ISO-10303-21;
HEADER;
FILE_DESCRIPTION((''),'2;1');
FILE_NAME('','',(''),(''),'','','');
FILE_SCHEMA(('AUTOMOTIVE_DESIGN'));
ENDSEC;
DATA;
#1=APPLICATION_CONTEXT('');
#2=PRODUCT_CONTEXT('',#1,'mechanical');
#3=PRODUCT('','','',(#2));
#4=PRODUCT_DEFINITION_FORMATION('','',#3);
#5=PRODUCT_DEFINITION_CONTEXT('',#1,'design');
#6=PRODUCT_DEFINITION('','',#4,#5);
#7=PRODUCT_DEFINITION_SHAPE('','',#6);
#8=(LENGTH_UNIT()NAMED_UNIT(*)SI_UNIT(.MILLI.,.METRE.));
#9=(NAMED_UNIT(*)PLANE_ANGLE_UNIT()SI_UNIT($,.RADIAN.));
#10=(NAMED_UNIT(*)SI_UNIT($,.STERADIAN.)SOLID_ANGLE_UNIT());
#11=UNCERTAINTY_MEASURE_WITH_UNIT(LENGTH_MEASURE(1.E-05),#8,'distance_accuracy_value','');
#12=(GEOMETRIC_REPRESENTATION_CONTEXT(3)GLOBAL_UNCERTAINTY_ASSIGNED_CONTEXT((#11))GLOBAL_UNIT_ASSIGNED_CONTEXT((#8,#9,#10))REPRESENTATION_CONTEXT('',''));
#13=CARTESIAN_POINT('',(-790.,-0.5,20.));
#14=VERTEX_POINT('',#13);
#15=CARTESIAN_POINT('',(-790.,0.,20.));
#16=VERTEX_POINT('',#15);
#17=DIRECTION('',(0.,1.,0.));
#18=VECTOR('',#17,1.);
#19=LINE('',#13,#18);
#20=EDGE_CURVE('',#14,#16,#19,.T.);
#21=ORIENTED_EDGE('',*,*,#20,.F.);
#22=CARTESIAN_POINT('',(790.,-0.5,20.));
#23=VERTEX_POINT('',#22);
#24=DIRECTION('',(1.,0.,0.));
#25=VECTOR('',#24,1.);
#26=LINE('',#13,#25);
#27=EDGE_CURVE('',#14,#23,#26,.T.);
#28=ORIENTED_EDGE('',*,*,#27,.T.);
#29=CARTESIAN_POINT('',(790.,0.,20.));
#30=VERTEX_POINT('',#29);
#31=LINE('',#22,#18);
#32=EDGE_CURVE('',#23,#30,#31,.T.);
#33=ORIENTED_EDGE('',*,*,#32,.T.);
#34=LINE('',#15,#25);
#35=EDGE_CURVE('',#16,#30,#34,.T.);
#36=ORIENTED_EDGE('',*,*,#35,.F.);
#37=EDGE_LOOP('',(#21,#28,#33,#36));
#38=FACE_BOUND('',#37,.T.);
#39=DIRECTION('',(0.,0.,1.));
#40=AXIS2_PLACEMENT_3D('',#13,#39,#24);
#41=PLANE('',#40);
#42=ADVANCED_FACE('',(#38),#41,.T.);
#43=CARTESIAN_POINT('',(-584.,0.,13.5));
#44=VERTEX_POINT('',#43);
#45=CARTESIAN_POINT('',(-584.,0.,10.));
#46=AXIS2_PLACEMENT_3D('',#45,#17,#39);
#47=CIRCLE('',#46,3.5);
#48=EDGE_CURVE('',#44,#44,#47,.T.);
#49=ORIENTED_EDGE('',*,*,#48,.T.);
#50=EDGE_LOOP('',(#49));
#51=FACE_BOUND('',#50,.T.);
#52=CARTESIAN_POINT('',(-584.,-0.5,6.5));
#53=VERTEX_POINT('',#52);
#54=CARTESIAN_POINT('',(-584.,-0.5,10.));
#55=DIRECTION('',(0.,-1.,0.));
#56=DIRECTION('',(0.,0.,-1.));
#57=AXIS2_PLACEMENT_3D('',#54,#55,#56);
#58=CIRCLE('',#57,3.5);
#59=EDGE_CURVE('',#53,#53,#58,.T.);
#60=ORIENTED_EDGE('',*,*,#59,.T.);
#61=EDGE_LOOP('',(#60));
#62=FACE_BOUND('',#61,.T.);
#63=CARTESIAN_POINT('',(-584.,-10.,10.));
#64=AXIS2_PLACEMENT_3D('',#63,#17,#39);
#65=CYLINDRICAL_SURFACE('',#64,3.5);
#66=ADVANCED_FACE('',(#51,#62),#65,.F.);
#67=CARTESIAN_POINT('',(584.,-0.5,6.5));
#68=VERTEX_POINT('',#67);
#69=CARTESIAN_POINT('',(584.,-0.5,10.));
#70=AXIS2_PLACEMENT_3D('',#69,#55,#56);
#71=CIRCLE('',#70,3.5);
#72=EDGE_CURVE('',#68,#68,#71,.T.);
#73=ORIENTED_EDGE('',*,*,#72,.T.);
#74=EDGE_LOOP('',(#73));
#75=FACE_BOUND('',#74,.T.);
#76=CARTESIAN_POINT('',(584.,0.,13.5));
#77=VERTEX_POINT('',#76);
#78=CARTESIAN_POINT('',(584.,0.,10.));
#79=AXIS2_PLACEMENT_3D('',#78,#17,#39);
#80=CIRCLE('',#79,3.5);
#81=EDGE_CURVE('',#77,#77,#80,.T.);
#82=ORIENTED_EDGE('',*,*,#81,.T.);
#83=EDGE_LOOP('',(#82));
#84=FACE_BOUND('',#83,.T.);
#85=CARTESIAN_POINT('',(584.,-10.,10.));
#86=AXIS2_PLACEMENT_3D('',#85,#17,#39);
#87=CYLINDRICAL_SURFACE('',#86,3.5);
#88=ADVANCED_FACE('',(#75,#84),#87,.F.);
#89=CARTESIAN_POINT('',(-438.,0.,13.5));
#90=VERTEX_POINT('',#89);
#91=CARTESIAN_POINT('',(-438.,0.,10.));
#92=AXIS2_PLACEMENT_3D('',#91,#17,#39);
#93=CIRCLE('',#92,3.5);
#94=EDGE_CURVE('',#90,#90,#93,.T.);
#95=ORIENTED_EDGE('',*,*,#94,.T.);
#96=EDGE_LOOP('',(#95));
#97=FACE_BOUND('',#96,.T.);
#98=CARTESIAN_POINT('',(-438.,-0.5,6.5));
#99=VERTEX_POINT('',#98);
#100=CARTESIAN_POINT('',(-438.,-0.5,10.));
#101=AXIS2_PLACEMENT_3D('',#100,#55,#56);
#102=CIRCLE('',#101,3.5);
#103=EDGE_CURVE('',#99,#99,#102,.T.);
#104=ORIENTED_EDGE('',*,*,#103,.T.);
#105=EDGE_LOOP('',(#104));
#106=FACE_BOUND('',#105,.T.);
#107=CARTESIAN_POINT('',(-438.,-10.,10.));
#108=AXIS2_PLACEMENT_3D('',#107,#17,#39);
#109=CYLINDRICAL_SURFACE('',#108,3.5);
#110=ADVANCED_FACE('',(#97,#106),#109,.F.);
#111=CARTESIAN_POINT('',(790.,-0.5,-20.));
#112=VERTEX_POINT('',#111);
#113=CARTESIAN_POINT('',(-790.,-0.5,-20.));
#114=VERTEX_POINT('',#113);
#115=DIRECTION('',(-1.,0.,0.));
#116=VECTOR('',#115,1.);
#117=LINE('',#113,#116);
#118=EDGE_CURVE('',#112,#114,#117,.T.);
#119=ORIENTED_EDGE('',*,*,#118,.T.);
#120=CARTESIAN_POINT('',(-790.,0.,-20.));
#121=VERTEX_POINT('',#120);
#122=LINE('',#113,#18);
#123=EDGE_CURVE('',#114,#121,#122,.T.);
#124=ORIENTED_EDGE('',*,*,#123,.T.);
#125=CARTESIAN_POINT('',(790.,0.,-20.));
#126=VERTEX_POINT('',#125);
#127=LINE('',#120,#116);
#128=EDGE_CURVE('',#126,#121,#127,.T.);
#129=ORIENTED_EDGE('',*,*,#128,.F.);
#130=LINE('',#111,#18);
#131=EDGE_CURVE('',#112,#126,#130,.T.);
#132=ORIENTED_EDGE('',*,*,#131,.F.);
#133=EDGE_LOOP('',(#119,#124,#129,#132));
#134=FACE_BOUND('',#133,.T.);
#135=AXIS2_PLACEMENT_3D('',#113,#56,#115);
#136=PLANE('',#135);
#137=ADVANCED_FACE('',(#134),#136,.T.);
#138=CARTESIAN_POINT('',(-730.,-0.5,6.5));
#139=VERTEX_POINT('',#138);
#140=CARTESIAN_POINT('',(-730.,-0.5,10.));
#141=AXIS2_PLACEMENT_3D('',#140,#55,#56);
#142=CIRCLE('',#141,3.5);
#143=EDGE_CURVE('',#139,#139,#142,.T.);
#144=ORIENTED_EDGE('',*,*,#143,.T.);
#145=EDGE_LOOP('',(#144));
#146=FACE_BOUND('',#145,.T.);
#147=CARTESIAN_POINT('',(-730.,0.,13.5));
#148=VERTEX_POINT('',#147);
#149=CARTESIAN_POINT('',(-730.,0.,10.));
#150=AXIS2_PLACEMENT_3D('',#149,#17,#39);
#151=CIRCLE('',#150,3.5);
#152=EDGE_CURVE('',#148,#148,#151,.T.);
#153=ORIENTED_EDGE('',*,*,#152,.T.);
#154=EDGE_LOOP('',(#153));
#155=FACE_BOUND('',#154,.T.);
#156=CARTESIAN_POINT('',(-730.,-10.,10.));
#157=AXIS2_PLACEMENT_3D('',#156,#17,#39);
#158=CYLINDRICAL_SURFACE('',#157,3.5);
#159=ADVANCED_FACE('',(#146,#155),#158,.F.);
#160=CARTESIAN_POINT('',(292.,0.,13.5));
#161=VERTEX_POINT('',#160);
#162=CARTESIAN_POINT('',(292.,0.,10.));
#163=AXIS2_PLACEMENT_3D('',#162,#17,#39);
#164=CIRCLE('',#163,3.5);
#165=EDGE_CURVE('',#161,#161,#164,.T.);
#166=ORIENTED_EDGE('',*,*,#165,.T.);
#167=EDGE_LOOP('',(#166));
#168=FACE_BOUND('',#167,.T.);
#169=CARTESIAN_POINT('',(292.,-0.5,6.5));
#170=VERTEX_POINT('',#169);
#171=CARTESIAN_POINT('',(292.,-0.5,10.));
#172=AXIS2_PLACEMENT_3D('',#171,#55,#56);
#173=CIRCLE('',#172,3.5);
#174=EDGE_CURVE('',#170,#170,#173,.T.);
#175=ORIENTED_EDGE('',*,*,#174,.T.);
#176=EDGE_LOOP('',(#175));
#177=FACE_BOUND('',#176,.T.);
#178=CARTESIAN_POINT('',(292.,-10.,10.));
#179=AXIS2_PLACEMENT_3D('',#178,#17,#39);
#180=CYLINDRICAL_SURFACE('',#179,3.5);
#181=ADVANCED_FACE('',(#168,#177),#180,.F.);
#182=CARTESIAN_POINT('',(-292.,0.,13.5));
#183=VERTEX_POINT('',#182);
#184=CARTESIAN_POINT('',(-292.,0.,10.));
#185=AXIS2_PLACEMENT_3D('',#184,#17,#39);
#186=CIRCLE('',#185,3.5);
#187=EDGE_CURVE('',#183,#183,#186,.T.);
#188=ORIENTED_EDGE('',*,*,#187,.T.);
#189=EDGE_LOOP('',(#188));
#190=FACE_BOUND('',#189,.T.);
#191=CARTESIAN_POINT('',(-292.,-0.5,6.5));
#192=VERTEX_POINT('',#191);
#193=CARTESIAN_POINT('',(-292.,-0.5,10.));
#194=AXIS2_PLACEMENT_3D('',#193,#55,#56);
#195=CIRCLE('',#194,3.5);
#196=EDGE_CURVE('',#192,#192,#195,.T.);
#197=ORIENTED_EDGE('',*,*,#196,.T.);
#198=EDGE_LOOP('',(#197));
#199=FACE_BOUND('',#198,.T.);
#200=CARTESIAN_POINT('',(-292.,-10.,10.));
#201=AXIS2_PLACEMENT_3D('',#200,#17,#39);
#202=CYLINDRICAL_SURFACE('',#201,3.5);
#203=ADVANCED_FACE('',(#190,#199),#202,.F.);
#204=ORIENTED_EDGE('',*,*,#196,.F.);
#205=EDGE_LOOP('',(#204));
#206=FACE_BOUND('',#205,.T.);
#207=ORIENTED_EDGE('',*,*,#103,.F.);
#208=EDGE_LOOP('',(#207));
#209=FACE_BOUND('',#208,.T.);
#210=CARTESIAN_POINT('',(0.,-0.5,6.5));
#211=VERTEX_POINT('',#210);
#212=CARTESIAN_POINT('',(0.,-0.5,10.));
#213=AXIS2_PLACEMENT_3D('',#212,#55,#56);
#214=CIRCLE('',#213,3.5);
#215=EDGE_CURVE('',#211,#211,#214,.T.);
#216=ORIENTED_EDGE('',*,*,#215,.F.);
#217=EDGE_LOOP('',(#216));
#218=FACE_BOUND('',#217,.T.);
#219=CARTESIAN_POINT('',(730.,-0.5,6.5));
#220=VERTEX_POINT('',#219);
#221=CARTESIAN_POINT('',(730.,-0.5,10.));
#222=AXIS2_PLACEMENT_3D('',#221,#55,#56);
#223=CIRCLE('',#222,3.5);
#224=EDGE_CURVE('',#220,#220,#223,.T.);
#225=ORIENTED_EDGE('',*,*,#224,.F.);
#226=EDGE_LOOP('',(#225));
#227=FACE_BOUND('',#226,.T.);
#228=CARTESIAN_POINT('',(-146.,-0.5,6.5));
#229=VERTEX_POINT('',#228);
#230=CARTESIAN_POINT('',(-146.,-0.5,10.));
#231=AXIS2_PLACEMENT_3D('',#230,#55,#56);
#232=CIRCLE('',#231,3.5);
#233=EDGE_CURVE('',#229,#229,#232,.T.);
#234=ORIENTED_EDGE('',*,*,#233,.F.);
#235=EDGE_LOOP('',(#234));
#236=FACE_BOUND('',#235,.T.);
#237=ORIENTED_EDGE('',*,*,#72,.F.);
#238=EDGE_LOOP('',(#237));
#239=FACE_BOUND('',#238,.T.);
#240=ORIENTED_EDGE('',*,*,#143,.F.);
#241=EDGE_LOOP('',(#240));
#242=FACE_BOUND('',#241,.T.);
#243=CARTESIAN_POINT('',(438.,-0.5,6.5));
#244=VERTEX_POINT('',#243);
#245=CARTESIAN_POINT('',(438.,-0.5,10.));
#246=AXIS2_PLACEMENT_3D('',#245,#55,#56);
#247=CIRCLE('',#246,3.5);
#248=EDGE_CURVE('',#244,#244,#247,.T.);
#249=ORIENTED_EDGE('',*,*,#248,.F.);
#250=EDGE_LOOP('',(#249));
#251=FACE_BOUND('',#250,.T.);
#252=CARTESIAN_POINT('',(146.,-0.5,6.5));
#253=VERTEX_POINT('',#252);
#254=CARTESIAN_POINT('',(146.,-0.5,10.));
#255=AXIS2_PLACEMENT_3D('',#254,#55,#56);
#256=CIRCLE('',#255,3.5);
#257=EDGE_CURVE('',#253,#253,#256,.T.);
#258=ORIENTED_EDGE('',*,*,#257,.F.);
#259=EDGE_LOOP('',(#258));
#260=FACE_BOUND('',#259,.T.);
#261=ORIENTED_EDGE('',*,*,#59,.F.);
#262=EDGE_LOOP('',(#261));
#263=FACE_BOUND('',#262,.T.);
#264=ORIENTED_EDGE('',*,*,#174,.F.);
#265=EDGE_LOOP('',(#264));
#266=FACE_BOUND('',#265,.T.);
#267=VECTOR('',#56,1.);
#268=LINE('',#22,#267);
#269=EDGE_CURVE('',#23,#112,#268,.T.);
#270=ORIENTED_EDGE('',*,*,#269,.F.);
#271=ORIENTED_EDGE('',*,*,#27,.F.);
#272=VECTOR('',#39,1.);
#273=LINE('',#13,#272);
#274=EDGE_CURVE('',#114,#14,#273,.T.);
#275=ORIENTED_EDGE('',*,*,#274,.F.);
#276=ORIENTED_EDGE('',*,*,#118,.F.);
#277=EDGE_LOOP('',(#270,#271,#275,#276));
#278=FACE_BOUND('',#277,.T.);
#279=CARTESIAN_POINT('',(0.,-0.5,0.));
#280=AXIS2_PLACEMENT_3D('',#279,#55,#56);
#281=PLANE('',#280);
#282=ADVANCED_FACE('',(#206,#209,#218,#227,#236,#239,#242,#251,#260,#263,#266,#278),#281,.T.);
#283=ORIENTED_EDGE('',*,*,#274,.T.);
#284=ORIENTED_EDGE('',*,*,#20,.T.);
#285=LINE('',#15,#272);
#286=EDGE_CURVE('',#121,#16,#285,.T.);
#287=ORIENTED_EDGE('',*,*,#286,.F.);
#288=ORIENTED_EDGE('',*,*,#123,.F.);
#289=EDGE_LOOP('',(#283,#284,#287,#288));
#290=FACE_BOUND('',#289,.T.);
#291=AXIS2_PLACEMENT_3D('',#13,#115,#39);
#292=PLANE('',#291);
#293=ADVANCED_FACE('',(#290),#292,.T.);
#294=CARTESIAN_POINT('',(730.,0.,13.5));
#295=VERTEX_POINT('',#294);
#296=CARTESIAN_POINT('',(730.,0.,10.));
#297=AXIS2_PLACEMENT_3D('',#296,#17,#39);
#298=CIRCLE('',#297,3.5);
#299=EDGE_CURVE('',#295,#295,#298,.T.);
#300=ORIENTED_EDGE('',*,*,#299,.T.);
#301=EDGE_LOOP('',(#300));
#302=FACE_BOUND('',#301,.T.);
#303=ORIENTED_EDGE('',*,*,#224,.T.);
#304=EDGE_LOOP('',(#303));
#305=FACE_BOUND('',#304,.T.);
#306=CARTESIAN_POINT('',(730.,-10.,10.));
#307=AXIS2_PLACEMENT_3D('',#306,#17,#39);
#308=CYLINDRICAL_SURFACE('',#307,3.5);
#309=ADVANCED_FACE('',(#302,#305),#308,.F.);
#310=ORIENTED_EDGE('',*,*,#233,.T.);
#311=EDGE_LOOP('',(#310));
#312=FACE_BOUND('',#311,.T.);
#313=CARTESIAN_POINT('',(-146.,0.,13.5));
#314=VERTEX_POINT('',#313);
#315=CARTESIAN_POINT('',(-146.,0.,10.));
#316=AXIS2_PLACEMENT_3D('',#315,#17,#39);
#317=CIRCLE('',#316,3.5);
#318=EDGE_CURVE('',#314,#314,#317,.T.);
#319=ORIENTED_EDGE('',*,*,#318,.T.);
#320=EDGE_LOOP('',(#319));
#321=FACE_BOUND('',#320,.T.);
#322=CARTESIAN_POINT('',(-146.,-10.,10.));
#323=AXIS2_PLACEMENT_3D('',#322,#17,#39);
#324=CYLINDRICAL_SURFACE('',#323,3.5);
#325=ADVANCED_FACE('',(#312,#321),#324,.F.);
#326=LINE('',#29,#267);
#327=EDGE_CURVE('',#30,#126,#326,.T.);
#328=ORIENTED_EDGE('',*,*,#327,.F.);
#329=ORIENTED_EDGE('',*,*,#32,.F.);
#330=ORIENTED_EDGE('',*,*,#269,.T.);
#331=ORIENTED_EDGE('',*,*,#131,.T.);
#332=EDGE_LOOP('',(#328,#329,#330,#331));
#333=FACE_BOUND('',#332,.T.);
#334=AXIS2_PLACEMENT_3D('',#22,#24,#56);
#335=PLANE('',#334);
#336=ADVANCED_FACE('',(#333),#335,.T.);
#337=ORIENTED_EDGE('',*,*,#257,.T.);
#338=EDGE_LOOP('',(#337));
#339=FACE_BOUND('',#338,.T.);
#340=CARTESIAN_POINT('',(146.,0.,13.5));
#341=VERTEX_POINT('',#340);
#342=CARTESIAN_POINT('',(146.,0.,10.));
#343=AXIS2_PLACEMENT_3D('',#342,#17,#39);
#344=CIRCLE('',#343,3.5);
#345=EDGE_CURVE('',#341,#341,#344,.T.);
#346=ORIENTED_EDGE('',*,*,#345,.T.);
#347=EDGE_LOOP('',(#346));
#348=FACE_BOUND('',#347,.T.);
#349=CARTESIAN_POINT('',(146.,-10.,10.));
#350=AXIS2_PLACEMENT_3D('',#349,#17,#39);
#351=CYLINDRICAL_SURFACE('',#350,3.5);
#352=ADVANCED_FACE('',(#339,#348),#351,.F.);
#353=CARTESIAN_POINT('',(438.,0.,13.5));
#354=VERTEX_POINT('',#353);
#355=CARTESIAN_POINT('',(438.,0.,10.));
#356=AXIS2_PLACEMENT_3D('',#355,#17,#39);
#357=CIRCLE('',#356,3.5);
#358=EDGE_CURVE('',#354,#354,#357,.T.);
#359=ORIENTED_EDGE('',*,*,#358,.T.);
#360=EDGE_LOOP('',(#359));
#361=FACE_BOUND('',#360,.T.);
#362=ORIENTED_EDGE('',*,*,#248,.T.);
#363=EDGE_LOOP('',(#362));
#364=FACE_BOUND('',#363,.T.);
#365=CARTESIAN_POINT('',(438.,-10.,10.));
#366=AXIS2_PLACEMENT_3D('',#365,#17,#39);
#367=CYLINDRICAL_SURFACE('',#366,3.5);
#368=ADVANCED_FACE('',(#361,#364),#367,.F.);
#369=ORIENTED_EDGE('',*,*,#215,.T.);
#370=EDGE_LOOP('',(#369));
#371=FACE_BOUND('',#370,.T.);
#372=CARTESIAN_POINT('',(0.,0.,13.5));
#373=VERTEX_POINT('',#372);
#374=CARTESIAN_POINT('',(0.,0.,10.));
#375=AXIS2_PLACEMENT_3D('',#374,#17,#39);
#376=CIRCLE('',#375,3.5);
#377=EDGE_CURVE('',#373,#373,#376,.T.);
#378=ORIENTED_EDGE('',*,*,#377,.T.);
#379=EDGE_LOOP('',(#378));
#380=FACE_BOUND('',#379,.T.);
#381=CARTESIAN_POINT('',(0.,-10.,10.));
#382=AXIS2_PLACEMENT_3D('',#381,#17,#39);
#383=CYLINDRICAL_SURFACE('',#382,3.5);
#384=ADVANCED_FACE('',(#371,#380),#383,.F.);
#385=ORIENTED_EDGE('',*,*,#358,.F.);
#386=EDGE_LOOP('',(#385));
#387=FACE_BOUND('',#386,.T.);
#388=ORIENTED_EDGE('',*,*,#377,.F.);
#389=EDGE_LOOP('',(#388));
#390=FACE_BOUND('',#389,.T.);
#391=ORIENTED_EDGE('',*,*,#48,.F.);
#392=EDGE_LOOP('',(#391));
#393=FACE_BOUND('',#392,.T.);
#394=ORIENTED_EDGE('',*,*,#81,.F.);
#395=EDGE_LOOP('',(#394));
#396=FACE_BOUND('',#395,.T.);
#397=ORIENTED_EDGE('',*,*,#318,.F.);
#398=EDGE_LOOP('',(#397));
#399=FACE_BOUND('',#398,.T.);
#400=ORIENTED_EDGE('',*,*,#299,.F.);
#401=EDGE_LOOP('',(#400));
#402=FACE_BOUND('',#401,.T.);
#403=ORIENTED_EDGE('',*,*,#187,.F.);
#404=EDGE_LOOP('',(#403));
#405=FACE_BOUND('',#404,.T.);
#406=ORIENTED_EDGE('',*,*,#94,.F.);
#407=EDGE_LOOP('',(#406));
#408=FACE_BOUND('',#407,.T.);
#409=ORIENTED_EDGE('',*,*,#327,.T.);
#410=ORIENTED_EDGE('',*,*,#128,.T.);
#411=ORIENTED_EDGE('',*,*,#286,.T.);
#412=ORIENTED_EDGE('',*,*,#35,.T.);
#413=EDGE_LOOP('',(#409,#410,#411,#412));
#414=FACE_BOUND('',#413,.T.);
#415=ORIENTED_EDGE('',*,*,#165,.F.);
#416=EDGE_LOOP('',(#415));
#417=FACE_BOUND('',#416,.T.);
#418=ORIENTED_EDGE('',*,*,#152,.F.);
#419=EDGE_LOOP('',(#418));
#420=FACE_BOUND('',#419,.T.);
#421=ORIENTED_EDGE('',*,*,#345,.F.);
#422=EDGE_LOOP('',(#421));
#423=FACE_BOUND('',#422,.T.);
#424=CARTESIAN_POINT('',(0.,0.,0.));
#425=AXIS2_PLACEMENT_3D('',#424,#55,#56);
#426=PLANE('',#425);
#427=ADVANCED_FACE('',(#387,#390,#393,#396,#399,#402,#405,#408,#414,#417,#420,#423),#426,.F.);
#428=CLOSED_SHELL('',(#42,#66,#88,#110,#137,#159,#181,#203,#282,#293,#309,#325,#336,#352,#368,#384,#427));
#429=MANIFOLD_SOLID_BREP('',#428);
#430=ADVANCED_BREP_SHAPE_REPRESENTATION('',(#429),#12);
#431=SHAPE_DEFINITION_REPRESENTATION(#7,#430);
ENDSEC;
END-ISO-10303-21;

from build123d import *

# Parameters (mm, degrees)
SKETCH1_W           = 1580
SKETCH1_H           = 40
BASE_FLANGE1_DEPTH  = 0.5
SKETCH6_R           = 3.5
CUT_EXTRUDE1_DEPTH  = 10
LPATTERN1_COUNT     = 6
LPATTERN1_PITCH     = 146
LPATTERN1_COL_COUNT = 6
LPATTERN1_COL_PITCH = 146


# Sheet-metal steps are written as plain solids
with BuildPart() as part:
    # Sketch1 → Base-Flange1 (new body)
    with BuildSketch(Plane(origin=(0, 0, 0), x_dir=(1, 0, 0), z_dir=(0, 1, 0))):
        Rectangle(SKETCH1_W, SKETCH1_H)
    extrude(amount=-BASE_FLANGE1_DEPTH)

    # Sketch6 → Cut-Extrude1 (cut)
    with BuildSketch(Plane(origin=(0, 0, 0), x_dir=(1, 0, 0), z_dir=(0, 1, 0))):
        with Locations(Location((0, -10, 0), (0, 0, 270))):
            Circle(SKETCH6_R)
    cut_extrude1 = extrude(amount=-CUT_EXTRUDE1_DEPTH, mode=Mode.SUBTRACT)

    # LPattern1: Cut-Extrude1 ×6
    with Locations(*[(-i * LPATTERN1_PITCH, 0, 0) for i in range(1, LPATTERN1_COUNT)]):
        add(cut_extrude1, mode=Mode.SUBTRACT)

    # LPattern1 col: Cut-Extrude1 ×6
    with Locations(*[(i * LPATTERN1_COL_PITCH, 0, 0) for i in range(1, LPATTERN1_COL_COUNT)]):
        add(cut_extrude1, mode=Mode.SUBTRACT)


solid = part.part
